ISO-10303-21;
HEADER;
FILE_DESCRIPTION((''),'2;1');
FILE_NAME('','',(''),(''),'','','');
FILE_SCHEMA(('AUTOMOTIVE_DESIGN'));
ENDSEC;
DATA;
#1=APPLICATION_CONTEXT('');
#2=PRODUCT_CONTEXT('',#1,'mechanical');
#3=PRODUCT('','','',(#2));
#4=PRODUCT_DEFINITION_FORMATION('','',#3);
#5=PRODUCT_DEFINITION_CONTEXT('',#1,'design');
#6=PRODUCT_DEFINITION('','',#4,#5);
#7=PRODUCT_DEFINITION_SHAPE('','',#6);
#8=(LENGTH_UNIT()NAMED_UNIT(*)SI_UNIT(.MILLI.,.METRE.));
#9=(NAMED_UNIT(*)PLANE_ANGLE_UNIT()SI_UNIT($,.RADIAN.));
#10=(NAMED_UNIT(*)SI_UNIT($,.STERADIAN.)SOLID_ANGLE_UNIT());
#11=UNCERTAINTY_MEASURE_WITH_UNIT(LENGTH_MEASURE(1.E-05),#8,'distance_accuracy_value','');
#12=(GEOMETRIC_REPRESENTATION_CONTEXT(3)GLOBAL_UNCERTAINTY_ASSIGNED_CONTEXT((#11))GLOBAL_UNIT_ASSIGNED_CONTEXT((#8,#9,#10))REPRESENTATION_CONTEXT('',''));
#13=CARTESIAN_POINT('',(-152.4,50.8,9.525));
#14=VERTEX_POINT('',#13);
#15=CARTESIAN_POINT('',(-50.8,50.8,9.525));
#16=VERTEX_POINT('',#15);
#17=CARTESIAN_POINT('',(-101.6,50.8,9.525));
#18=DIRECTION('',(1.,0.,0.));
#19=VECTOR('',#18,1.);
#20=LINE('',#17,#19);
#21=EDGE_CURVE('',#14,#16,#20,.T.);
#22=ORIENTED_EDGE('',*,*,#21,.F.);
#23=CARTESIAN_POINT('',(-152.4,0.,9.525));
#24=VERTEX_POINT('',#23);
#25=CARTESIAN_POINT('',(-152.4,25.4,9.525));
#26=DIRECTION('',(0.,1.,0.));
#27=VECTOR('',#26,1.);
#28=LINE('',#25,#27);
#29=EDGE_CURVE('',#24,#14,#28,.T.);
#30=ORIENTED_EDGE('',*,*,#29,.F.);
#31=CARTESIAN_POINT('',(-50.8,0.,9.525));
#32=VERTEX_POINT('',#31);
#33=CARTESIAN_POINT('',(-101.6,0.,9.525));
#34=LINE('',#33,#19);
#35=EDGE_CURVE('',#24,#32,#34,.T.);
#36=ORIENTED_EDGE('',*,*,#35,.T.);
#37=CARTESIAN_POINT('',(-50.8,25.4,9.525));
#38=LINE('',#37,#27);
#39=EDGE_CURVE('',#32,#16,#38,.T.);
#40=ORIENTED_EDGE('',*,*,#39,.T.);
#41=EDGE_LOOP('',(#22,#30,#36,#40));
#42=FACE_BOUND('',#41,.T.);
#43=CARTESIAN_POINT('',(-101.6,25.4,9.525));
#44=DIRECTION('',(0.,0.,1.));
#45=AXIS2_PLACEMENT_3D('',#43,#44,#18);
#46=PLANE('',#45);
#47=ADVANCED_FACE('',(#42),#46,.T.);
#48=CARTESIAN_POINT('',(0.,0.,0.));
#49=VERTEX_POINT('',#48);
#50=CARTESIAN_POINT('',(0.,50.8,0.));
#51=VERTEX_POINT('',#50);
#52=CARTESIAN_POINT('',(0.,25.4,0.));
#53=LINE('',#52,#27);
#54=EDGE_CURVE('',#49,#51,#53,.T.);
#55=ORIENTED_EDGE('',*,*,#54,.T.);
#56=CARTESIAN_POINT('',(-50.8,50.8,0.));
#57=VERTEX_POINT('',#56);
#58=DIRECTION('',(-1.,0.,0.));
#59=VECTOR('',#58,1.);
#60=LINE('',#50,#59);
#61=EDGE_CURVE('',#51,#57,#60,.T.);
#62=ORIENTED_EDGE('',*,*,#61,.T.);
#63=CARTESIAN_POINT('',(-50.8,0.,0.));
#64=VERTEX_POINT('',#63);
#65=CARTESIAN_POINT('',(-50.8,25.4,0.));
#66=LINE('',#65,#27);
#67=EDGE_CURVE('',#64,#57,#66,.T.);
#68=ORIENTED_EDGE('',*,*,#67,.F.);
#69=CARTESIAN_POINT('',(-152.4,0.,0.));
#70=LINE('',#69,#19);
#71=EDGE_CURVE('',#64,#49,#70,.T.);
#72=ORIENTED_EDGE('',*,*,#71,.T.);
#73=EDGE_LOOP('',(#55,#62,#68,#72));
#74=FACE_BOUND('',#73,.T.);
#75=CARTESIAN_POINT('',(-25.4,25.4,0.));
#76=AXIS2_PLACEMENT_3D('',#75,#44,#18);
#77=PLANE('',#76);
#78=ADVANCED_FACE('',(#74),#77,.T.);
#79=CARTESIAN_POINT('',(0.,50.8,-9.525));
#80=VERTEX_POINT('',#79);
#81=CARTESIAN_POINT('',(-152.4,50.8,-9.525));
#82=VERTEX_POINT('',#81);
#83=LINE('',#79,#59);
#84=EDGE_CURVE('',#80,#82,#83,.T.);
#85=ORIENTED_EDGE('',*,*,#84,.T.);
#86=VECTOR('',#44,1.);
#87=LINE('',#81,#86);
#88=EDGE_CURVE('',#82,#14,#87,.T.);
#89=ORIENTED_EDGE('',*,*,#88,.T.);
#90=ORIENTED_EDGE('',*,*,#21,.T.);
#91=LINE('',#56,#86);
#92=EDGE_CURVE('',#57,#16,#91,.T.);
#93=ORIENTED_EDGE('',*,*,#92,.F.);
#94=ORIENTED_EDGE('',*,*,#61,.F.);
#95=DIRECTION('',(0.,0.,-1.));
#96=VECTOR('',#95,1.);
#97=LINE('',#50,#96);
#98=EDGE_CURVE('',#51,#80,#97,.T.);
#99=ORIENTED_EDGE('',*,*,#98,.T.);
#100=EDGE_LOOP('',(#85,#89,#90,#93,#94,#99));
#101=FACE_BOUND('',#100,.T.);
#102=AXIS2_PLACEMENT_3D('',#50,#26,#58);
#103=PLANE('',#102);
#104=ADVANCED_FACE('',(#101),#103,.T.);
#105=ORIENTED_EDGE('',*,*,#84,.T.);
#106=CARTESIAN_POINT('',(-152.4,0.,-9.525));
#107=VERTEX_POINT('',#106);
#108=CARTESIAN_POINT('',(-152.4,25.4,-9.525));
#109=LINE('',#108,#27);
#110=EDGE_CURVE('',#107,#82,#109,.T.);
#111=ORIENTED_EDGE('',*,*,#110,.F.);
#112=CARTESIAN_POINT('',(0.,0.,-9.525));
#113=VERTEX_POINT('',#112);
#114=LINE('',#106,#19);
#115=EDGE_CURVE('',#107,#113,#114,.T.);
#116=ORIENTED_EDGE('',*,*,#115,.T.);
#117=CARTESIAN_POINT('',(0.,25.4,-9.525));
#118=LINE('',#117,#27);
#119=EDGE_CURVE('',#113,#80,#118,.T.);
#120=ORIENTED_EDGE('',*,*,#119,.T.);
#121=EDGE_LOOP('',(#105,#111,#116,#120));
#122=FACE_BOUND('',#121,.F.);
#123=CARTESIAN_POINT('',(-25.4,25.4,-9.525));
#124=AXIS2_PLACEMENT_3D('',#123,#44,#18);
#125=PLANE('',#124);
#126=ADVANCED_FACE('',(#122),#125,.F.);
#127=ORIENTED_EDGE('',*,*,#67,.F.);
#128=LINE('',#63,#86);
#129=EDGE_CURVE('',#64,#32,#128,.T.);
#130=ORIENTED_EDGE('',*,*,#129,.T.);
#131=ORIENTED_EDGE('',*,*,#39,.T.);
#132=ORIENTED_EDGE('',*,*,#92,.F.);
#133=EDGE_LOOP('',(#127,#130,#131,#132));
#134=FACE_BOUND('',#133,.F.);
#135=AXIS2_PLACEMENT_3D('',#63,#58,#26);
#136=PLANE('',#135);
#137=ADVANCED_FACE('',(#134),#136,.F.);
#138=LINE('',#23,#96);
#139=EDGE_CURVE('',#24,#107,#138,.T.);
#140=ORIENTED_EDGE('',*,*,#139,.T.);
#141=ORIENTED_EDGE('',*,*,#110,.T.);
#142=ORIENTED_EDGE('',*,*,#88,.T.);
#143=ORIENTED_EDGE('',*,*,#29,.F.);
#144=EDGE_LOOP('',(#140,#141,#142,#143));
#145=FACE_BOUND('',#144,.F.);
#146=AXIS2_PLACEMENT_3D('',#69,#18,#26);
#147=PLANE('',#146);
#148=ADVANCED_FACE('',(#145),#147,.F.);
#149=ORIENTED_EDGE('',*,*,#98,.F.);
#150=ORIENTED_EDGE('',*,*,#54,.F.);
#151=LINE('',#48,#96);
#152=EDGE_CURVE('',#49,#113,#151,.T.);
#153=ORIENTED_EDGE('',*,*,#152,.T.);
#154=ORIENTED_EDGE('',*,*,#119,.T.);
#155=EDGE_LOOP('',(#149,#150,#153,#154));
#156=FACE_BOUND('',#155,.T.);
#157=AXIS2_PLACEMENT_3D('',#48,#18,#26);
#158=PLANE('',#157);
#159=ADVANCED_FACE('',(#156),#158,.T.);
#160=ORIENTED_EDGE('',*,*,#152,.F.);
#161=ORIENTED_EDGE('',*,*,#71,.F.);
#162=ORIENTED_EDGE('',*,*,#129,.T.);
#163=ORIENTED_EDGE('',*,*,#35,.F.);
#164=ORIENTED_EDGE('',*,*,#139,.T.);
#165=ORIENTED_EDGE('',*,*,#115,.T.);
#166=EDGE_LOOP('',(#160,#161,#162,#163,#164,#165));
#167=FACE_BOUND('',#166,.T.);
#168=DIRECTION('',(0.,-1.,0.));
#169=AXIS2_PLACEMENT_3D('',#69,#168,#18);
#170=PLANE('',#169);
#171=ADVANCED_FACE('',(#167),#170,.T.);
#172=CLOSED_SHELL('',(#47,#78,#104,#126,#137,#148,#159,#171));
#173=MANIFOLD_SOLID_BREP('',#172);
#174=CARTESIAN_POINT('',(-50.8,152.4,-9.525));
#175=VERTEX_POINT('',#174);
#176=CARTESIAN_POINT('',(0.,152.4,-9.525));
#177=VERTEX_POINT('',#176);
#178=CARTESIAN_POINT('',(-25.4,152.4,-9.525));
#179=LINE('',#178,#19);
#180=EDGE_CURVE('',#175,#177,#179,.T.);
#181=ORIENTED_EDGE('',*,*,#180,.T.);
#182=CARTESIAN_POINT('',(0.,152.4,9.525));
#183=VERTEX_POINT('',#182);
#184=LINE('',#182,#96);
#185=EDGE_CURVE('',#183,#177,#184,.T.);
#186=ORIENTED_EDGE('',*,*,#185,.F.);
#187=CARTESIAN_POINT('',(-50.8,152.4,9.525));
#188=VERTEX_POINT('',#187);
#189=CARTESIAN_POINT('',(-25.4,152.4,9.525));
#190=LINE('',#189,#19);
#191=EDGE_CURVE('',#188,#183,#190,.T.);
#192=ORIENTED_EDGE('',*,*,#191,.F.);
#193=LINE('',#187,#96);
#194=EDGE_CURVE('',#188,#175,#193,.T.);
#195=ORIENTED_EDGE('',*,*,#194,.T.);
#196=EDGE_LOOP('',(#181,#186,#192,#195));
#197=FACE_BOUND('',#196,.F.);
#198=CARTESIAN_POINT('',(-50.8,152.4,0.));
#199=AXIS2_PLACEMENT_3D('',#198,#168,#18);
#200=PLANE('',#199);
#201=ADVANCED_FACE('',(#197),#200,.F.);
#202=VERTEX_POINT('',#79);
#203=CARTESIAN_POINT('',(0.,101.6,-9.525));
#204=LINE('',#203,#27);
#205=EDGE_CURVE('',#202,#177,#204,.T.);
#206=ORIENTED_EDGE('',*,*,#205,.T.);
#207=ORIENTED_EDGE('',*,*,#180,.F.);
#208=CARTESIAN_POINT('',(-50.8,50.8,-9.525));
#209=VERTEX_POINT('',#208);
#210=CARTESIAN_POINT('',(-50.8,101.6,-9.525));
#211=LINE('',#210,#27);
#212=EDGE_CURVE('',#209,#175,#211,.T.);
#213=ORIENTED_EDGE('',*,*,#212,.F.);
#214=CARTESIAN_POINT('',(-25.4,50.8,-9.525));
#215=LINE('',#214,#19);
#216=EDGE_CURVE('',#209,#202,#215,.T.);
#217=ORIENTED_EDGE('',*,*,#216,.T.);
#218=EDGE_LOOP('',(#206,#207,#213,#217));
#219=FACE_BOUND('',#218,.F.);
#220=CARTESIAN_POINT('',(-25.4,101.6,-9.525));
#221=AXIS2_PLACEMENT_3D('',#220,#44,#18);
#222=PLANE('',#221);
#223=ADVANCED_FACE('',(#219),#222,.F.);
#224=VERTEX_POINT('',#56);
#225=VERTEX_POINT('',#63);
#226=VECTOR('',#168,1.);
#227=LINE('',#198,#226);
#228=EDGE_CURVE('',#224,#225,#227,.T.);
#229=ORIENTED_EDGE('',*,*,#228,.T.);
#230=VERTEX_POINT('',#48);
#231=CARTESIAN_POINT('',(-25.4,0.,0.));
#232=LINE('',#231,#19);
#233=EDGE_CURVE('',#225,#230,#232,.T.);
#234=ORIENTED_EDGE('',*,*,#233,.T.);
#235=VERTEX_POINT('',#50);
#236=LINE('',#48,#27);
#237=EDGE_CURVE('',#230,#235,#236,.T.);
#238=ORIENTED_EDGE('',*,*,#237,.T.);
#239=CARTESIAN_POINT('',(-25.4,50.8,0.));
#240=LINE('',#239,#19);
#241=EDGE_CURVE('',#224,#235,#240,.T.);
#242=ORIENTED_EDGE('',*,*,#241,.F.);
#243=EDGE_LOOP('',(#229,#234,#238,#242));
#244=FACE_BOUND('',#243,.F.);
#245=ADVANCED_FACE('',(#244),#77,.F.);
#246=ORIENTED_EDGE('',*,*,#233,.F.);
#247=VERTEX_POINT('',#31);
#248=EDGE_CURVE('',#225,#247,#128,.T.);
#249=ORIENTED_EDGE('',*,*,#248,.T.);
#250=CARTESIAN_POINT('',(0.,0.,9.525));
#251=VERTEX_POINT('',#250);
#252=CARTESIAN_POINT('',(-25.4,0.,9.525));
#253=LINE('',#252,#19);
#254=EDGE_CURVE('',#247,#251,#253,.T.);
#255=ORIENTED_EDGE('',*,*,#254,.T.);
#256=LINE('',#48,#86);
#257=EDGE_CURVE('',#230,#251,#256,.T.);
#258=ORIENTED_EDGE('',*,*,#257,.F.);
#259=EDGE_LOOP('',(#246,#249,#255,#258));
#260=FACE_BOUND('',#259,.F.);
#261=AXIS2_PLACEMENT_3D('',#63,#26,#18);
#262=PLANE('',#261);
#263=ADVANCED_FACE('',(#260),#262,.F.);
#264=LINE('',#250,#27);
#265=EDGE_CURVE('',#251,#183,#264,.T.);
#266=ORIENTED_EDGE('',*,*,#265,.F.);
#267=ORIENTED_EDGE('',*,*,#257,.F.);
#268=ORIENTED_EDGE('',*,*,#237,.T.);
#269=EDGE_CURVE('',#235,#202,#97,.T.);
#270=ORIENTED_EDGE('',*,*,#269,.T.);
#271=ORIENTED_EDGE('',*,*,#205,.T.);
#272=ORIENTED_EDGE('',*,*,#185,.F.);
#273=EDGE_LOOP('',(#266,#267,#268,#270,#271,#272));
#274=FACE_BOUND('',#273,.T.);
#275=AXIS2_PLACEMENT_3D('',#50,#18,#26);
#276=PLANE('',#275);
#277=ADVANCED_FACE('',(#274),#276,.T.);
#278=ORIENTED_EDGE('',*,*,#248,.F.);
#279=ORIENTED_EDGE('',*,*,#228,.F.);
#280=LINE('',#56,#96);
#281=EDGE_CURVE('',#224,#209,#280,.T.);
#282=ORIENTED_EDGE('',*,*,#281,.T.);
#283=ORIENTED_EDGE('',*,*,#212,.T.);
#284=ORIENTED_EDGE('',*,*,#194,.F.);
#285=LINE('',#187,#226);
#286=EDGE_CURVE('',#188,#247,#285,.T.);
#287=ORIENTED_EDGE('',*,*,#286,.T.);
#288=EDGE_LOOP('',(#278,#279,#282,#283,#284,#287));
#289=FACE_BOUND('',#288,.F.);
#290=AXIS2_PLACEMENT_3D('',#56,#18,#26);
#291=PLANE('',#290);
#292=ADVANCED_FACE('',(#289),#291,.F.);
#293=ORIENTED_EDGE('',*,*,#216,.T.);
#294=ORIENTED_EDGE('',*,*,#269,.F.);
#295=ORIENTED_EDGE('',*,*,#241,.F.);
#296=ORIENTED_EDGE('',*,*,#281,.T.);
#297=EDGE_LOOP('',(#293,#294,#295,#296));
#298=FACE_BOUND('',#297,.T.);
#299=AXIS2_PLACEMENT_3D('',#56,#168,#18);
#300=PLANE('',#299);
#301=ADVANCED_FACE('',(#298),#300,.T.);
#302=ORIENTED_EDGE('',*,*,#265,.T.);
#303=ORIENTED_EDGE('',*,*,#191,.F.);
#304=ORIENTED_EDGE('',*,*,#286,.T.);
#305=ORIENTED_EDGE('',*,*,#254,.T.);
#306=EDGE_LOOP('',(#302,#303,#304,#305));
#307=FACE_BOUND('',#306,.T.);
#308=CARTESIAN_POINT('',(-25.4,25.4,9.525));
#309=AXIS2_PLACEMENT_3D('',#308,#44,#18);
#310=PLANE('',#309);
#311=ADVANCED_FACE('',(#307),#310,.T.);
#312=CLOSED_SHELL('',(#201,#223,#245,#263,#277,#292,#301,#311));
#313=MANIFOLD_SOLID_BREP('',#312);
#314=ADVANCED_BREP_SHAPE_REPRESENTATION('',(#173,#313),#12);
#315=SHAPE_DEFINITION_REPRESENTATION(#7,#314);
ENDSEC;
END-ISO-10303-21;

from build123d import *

# Parameters (mm, degrees)
F0_W     = 101.6
F0_H     = 50.8
F1_DEPTH = 9.525
F0_W_2   = 50.8
F2_DEPTH = 9.525
F0_H_2   = 101.6
F3_DEPTH = 9.525
F4_DEPTH = 9.525


with BuildPart() as f1:
    # F0 (on Top) → F1 (new body)
    with BuildSketch(Plane.XY):
        with Locations((-101.6, 25.4)):
            Rectangle(F0_W, F0_H)
    extrude(amount=F1_DEPTH)

    # F0 (on Top) → F2 (join)
    with BuildSketch(Plane.XY):
        with Locations((-25.4, 25.4)):
            Rectangle(F0_W_2, F0_H)
        with Locations((-101.6, 25.4)):
            Rectangle(F0_W, F0_H)
    extrude(amount=-F2_DEPTH)


with BuildPart() as f3:
    # F0 (on Top) → F3 (new body)
    with BuildSketch(Plane.XY):
        with Locations((-25.4, 25.4)):
            Rectangle(F0_W_2, F0_H)
        with Locations((-25.4, 101.6)):
            Rectangle(F0_W_2, F0_H_2)
    extrude(amount=F3_DEPTH)

    # F0 (on Top) → F4 (join)
    with BuildSketch(Plane.XY):
        with Locations((-25.4, 101.6)):
            Rectangle(F0_W_2, F0_H_2)
    extrude(amount=-F4_DEPTH)


solid = Compound([f1.part, f3.part])
